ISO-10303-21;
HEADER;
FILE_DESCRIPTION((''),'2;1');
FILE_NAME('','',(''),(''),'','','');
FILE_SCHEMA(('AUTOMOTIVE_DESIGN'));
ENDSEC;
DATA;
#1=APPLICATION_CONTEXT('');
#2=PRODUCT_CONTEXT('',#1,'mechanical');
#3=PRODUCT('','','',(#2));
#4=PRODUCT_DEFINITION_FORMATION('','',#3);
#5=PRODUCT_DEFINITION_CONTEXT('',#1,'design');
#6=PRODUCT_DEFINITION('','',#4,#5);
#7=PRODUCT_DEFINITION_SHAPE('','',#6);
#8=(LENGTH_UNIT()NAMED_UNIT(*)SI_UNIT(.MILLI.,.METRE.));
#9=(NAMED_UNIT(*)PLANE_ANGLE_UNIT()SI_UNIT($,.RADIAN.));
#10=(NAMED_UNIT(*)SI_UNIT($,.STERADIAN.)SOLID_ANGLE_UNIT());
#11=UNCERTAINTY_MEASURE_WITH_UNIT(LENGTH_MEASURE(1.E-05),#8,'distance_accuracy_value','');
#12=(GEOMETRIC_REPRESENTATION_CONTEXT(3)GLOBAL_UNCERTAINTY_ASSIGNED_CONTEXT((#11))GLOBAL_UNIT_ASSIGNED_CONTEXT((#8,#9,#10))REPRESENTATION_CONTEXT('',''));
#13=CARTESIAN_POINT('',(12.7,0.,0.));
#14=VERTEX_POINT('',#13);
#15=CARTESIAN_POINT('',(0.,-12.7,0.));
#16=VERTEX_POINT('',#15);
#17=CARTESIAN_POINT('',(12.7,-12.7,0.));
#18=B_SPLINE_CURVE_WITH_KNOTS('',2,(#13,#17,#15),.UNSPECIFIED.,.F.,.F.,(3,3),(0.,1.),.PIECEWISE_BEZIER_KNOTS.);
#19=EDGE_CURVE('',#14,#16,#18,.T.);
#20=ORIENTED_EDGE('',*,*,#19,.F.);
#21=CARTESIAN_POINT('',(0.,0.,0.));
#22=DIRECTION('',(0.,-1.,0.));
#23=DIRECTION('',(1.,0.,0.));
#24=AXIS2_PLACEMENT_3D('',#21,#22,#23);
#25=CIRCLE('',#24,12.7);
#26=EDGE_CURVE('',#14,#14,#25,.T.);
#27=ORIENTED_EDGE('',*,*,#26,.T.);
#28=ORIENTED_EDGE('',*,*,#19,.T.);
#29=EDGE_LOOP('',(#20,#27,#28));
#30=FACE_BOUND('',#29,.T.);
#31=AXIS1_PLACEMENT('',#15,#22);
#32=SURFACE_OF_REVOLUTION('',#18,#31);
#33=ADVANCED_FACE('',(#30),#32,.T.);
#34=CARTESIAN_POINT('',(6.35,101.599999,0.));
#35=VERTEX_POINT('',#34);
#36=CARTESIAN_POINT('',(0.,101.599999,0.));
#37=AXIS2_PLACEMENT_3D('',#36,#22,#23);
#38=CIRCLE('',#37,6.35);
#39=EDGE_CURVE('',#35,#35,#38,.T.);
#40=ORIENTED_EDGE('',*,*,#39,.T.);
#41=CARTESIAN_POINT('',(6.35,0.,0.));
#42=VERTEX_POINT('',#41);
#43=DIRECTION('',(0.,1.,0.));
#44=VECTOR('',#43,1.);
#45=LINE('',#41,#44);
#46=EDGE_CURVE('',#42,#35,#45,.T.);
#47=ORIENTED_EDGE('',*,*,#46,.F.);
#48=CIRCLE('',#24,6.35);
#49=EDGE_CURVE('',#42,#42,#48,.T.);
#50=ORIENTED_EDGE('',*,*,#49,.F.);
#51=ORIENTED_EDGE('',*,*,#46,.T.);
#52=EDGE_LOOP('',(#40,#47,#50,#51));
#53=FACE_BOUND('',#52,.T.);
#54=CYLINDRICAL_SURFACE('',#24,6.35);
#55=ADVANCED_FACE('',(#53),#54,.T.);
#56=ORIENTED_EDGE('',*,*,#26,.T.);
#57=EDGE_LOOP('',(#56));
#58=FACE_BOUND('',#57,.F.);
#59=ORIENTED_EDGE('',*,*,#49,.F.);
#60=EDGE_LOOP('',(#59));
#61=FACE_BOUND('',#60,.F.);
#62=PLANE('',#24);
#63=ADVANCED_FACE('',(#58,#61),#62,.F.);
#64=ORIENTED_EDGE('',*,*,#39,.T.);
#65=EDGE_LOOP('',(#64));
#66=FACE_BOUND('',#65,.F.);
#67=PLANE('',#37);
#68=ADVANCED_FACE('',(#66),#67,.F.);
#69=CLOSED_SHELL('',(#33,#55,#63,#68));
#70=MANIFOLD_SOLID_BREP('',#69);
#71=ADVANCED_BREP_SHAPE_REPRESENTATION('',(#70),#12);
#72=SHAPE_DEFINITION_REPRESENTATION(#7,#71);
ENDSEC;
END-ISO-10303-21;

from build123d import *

# Parameters (mm, degrees)
F0_R     = 6.35
F1_DEPTH = 101.5999987721
F2_R     = 12.7
F3_DEPTH = 12.7


# Not quite as in the source:
# - a fillet or chamfer that OpenCascade refuses, or shapes differently, is made with other operations: its cross-section is extruded or revolved along the edge and cut away or added


with BuildPart() as f1:
    # F0 (on Front) → F1 (new body)
    with BuildSketch(Plane.XZ):
        Circle(F0_R)
    extrude(amount=-F1_DEPTH)

    # F2 (on face) + F0 (on Front) → F3 (join)
    with BuildSketch(Plane.XZ):
        Circle(F2_R)
    with BuildSketch(Plane.XZ):
        Circle(F0_R)
    extrude(amount=F3_DEPTH)

    # F4: fillet of radius 12.7 on 1 edges, made by hand

    # F4_s1 → F4_t2 (revolve, cut)
    with BuildSketch(Plane.XY):
        with BuildLine():
            add(Edge.make_bspline(
                [(12.7, 0), (12.7, -12.7), (0, -12.7)],
                knots=[0, 0, 0, 1, 1, 1], degree=2, weights=[1, 1, 1]))
            Line((0, -12.7), (12.7, -12.7))
            Line((12.7, -12.7), (12.7, 0))
        make_face()
    revolve(axis=Axis((0, -12.7, 0), (0, -1, 0)), mode=Mode.SUBTRACT)


solid = f1.part
